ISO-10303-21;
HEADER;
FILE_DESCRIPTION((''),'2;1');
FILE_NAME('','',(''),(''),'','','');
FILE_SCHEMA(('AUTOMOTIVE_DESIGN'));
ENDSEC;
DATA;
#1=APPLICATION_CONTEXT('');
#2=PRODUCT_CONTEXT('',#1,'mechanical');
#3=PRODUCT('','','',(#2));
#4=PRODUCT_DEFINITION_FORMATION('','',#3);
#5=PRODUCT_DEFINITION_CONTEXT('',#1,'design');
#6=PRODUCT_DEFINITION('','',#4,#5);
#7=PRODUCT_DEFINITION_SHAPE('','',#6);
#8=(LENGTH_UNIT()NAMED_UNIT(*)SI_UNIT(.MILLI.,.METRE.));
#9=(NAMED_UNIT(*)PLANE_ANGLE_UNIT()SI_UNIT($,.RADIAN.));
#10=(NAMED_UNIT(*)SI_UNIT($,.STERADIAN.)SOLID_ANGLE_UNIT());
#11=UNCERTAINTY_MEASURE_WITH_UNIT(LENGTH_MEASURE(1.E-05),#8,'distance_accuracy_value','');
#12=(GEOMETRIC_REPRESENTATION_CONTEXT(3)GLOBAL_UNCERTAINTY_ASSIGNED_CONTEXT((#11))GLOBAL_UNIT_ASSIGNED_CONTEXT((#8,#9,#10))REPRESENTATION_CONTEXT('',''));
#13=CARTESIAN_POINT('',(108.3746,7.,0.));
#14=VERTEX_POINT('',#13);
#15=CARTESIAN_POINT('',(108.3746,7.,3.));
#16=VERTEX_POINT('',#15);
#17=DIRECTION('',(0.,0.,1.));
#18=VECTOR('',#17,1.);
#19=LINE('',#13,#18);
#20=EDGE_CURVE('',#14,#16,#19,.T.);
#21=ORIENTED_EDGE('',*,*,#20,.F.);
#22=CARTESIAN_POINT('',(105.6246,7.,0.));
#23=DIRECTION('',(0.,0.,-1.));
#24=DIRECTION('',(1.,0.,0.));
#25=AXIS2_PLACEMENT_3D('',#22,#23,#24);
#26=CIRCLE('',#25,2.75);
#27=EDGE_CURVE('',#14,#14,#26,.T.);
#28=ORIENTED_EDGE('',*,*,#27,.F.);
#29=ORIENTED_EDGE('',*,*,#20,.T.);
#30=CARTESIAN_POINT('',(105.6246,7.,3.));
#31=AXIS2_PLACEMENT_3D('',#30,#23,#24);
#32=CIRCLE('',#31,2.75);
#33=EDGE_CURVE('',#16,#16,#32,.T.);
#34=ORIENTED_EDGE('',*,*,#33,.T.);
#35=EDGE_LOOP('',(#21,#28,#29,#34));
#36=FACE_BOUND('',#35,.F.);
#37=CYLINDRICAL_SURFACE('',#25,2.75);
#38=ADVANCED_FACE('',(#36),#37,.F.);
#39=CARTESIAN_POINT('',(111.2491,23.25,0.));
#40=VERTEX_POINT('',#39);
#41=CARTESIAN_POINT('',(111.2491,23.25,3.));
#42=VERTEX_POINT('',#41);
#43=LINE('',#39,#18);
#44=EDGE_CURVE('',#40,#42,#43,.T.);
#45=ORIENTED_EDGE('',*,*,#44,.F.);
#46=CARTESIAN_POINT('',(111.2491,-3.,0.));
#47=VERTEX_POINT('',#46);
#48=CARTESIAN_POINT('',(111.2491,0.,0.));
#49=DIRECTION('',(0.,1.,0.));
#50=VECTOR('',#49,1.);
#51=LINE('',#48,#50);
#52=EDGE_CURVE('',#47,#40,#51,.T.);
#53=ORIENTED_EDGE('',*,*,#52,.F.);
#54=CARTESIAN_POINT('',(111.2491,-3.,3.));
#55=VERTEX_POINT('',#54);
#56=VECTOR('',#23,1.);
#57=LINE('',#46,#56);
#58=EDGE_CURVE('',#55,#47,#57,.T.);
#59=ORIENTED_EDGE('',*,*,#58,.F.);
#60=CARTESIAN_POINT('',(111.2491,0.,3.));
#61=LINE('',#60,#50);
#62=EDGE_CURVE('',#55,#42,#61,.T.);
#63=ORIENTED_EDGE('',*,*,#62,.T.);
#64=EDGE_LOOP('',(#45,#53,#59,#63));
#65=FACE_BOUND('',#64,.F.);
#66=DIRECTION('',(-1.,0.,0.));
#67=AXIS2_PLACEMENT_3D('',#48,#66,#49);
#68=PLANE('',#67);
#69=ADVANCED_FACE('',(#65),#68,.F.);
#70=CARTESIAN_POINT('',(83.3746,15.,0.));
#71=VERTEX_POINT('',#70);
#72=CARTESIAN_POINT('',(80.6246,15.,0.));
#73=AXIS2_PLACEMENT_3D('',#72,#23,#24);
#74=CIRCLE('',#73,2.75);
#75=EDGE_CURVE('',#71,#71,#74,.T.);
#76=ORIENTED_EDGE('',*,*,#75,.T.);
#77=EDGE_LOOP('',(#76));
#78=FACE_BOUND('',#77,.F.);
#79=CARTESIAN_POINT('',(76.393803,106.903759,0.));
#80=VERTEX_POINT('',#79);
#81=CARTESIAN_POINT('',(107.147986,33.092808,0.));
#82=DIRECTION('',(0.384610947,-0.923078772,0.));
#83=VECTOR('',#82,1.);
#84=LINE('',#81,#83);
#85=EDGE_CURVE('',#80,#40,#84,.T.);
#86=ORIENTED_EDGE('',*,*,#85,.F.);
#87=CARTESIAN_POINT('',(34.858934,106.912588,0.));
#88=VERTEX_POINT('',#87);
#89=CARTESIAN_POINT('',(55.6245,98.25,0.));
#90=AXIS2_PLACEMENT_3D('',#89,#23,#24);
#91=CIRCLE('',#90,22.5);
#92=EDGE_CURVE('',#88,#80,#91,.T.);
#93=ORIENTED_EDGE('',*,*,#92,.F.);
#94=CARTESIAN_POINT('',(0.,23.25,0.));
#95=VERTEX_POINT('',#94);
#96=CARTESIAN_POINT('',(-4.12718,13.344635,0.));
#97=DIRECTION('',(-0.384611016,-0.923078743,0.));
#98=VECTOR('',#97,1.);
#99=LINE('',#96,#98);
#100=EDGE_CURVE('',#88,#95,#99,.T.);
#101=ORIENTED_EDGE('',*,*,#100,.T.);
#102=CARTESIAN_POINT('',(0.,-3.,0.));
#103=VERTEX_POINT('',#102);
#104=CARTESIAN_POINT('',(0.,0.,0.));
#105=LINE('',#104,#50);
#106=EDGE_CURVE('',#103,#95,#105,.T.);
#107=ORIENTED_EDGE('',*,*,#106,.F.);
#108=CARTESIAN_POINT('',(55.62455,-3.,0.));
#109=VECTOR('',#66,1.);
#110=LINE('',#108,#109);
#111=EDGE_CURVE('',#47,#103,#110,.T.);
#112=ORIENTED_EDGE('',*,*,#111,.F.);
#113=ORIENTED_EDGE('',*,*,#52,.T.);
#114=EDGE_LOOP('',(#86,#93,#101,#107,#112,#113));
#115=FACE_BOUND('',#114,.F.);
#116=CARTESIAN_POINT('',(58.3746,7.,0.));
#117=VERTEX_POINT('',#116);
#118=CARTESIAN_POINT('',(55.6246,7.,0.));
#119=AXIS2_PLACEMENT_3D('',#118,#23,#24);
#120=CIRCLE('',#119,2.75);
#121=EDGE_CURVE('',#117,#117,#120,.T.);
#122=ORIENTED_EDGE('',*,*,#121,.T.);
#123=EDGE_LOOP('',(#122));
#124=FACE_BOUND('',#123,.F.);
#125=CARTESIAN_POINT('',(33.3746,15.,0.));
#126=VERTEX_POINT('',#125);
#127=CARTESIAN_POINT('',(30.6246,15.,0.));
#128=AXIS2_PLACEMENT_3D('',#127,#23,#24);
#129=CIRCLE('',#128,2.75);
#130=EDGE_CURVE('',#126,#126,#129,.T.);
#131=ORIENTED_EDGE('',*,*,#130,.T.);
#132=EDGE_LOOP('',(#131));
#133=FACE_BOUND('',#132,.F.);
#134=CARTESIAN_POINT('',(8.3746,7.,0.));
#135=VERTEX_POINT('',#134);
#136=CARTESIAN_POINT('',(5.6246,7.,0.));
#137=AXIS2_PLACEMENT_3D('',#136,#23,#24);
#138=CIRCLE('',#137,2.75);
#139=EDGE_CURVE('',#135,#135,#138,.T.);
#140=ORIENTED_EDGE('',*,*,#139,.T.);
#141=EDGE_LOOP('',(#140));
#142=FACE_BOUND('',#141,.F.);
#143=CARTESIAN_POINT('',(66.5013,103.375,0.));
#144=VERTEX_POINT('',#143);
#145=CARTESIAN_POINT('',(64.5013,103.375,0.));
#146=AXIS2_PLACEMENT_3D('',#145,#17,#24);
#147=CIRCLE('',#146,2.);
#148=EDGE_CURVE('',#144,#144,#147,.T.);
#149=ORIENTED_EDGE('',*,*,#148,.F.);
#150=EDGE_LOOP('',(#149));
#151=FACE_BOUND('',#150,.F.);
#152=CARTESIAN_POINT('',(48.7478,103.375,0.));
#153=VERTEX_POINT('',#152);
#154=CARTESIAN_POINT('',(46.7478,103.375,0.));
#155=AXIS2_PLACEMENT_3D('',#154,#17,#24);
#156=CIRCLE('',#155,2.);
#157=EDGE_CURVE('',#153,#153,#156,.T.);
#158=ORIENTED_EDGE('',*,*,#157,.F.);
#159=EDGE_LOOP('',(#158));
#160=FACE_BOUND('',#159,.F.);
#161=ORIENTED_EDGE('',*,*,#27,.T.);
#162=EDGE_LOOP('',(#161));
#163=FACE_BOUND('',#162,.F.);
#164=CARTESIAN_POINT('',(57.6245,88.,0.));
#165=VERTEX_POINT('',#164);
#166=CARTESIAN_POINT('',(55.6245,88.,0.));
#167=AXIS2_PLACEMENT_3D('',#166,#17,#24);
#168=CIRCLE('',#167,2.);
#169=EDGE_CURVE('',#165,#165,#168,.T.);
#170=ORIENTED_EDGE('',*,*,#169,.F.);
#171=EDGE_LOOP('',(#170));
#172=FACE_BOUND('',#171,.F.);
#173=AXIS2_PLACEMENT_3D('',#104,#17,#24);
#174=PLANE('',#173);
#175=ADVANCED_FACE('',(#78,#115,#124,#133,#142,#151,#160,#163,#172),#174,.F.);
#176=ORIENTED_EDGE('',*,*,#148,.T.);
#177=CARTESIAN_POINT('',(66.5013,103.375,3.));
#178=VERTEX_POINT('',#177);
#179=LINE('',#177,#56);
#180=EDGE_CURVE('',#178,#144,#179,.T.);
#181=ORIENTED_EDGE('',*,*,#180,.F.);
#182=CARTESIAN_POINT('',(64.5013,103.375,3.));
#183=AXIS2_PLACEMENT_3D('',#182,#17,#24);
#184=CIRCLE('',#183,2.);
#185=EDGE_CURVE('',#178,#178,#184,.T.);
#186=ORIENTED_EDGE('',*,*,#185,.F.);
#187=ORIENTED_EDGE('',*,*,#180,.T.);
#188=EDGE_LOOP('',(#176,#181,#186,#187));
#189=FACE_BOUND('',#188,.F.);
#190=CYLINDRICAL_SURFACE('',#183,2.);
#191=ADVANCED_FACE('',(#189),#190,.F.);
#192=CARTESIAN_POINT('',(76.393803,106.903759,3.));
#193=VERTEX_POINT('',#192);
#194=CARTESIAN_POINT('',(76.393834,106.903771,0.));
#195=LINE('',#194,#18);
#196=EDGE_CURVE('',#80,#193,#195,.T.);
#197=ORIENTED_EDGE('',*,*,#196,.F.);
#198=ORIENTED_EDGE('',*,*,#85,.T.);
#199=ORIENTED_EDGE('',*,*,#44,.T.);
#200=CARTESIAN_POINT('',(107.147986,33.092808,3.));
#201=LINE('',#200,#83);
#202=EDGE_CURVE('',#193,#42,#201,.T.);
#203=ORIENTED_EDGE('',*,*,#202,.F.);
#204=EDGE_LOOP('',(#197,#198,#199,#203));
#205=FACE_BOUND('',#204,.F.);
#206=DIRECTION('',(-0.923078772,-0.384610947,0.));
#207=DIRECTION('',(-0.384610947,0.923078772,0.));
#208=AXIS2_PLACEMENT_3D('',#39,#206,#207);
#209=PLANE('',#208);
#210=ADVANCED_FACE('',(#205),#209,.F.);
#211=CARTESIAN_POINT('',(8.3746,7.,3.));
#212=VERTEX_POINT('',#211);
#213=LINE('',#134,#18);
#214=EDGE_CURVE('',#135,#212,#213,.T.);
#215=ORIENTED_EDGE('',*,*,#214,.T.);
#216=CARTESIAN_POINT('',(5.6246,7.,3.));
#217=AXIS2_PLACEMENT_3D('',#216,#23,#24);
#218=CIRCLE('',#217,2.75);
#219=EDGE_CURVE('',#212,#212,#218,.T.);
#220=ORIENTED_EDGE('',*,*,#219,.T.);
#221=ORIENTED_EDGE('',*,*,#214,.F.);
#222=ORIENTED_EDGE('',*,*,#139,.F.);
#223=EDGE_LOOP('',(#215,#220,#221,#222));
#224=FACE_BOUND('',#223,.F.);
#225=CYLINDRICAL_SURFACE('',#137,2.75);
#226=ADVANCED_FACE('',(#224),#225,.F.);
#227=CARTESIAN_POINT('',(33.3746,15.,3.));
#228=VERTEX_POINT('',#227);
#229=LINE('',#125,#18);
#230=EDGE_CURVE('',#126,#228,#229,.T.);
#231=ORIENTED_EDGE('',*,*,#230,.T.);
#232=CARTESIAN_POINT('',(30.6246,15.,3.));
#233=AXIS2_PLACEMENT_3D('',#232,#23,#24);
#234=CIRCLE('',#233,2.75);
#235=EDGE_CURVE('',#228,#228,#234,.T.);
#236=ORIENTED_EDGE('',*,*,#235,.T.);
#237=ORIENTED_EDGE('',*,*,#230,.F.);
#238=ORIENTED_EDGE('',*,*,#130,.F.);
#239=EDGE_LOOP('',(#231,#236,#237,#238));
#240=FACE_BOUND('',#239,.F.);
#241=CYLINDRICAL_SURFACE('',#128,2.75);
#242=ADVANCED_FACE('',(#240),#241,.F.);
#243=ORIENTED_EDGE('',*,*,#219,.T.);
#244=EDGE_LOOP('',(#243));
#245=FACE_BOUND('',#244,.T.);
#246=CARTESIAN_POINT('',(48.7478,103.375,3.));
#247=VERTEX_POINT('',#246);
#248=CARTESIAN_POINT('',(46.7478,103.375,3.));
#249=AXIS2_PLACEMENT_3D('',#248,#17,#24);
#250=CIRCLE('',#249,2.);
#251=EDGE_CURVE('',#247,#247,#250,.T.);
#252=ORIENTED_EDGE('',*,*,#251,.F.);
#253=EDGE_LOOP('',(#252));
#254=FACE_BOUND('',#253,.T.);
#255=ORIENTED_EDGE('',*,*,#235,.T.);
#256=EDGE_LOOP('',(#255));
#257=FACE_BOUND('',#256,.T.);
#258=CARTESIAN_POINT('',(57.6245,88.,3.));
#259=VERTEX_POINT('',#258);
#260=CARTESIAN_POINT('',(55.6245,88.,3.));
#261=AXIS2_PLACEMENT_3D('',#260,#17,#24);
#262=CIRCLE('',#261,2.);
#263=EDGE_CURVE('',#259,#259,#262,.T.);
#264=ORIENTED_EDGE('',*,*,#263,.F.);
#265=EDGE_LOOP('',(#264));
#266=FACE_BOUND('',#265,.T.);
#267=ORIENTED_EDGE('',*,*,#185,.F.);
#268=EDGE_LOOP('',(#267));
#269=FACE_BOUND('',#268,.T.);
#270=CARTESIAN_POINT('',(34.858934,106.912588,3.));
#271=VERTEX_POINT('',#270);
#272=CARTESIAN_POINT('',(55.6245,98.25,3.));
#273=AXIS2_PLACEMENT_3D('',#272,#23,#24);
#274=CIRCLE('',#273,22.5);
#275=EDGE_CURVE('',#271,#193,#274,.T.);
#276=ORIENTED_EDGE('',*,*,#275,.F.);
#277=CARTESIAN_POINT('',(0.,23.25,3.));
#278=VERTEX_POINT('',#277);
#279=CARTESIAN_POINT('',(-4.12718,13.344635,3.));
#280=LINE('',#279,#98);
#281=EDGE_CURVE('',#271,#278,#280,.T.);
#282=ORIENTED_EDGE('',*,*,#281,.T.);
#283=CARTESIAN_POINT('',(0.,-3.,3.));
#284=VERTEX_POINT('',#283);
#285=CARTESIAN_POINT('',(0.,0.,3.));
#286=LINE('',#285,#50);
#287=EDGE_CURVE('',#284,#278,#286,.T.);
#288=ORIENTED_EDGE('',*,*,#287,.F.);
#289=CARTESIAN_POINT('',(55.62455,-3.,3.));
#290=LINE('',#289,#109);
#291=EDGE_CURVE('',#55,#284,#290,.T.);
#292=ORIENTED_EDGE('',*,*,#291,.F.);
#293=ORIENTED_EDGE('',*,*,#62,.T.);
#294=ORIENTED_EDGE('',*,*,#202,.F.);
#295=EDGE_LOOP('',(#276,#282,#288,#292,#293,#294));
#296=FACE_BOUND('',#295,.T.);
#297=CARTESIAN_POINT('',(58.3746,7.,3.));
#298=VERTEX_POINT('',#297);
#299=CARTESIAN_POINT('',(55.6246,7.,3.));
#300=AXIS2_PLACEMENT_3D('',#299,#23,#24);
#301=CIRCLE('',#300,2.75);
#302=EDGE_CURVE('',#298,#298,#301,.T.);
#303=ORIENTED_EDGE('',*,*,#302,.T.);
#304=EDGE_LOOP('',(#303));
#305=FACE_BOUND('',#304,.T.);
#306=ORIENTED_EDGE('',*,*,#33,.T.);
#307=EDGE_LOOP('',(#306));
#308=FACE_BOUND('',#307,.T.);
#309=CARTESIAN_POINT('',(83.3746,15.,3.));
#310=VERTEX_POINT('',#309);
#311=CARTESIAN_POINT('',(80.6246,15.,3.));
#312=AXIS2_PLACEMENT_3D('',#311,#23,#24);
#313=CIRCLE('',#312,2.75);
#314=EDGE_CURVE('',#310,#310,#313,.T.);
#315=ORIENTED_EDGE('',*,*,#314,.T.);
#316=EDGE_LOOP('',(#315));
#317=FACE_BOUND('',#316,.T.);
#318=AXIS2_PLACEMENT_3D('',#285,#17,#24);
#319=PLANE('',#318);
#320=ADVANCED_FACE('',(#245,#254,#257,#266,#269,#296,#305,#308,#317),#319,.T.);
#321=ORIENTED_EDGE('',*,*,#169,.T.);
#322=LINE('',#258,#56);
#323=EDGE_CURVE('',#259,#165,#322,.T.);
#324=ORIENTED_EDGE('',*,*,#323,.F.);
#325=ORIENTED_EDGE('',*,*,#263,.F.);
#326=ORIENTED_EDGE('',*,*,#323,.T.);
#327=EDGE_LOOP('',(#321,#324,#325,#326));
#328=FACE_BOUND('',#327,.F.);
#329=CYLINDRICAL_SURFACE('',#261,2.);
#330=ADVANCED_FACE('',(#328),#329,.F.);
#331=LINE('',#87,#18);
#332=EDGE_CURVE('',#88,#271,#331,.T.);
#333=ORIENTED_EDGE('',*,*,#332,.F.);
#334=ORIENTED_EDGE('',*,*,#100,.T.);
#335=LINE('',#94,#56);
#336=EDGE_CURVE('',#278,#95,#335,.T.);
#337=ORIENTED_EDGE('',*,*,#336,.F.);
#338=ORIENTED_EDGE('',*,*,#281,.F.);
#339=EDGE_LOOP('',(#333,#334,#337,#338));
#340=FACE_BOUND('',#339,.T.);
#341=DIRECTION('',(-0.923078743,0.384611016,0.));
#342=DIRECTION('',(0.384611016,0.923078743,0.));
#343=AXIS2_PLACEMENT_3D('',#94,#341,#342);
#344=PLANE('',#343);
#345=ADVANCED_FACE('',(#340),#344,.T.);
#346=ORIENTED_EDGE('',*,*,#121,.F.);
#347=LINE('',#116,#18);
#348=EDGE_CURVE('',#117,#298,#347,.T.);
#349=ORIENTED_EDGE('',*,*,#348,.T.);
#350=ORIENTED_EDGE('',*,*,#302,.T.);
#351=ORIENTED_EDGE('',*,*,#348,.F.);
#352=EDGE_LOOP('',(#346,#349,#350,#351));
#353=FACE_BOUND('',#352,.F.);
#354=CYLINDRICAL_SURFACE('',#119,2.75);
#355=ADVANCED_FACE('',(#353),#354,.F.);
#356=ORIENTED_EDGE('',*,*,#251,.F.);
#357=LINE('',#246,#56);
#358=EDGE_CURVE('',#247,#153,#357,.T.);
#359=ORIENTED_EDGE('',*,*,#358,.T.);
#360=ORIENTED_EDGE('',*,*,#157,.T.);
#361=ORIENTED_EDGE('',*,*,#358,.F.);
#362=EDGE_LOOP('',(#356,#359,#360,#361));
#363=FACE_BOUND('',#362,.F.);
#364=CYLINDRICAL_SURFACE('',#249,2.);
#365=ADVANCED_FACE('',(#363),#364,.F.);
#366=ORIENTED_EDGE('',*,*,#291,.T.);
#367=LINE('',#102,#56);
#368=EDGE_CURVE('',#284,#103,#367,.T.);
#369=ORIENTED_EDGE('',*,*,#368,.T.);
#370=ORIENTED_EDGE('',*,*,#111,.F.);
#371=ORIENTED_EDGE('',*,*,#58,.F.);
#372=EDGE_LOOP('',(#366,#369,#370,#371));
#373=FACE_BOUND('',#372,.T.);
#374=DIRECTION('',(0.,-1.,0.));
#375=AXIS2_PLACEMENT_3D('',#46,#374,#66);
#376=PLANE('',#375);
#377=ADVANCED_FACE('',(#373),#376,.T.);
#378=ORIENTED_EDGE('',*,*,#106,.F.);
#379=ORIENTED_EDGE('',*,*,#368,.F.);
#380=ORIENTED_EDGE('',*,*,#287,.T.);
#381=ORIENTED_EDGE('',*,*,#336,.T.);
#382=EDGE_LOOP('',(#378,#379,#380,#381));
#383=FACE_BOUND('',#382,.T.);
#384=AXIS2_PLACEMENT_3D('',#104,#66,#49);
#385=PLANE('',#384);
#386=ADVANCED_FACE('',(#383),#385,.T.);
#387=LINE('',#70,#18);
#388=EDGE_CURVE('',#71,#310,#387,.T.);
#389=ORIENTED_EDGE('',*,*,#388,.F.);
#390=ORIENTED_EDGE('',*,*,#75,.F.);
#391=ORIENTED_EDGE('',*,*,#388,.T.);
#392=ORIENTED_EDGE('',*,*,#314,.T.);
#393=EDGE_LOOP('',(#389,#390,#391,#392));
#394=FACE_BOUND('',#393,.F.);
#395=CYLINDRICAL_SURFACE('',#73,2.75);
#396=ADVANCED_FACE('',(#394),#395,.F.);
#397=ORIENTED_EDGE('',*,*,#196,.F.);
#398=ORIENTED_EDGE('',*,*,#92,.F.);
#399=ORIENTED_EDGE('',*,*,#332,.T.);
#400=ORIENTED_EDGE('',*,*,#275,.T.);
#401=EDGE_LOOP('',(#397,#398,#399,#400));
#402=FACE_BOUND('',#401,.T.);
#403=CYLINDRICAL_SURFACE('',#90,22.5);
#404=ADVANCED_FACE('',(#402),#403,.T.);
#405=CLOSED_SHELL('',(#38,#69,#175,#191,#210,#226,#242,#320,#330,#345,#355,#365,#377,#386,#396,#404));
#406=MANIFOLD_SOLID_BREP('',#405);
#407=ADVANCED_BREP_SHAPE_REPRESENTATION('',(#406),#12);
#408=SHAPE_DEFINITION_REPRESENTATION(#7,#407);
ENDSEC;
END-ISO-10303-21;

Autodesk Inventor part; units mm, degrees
ref_plane "YZ Plane" through (0, 0, 0) normal (1, 0, 0) x (0, 1, 0)
ref_plane "XZ Plane" through (0, 0, 0) normal (0, 1, 0) x (-1, 0, 0)
ref_plane "XY Plane" through (0, 0, 0) normal (0, 0, 1) x (1, 0, 0)
sketch "Szkic1" plane through (0, 0, 0) normal (0, 0, 1) x (1, 0, 0)
  circle A0 centre (55.6246, 7) radius 2.75 projected
  circle A1 centre (30.6246, 15) radius 2.75 projected
  circle A2 centre (80.6246, 15) radius 2.75 projected
  circle A3 centre (5.6246, 7) radius 2.75 projected
  circle A4 centre (105.6246, 7) radius 2.75 projected
  line L0 (111.2491, 0) -> (0, 0) projected
  line L1 (111.2491, 0) -> (111.2491, 23.25) projected
  line L2 (0, 23.25) -> (111.2491, 23.25) projected
  line L3 (0, 0) -> (0, 23.25) projected
  line L4 (55.6245, 23.25) -> (55.6245, 98.25)
  circle A5 centre (55.6245, 98.25) radius 22.5
  line L5 (111.2491, 23.25) -> (24.4674, 231.5289)
  line L6 (0, 23.25) -> (68.7685, 188.2966)
  point P0 (76.3938, 106.9037)
  point P1 (34.8553, 106.9037)
  dimension "d0" = 75
  dimension "d1" = 98.25
  dimension "d2" = 45
extrude "Wyciągnięcie proste1" add sketch "Szkic1" along normal blind 3 contours L0 L3 L2 L1 | L2 L4 A5 L5 | L6 A5 L4 L2 | A5
sketch "Szkic2" plane through (0, 0, 3) normal (0, 0, 1) x (1, 0, 0)
  line L0 (34.8553, 106.9037) -> (0, 23.25) projected
  line L1 (0, 23.25) -> (0, 0) projected
  line L2 (0, 0) -> (111.2491, 0) projected
  line L3 (111.2491, 0) -> (111.2491, 23.25) projected
  line L4 (111.2491, 23.25) -> (76.3938, 106.9037) projected
  arc A0 (76.3938, 106.9037) -> (34.8553, 106.9037) centre (55.6245, 98.25) ccw projected
  circle A1 centre (105.6246, 7) radius 2.75 projected
  circle A2 centre (5.6246, 7) radius 2.75 projected
  circle A3 centre (80.6246, 15) radius 2.75 projected
  circle A4 centre (30.6246, 15) radius 2.75 projected
  circle A5 centre (55.6246, 7) radius 2.75 projected
  line L5 (55.6245, 98.25) -> (55.6245, 88)
  circle A6 centre (55.6245, 88) radius 2
  circle A7 centre (64.5013, 103.375) radius 2
  circle A8 centre (46.7478, 103.375) radius 2
  dimension "d5" = 10.25
  dimension "d6" = 4
  dimension "d9" = 360
extrude "Wyciągnięcie proste2" cut sketch "Szkic2" against normal through all contours A6 | A7 | A8
move faces "Przesuń1" translate (0, -3, 0) faces at (37.083, 0, 1)
properties part number "BLACHA_2_Przegub" material "Aluminium 6061"
